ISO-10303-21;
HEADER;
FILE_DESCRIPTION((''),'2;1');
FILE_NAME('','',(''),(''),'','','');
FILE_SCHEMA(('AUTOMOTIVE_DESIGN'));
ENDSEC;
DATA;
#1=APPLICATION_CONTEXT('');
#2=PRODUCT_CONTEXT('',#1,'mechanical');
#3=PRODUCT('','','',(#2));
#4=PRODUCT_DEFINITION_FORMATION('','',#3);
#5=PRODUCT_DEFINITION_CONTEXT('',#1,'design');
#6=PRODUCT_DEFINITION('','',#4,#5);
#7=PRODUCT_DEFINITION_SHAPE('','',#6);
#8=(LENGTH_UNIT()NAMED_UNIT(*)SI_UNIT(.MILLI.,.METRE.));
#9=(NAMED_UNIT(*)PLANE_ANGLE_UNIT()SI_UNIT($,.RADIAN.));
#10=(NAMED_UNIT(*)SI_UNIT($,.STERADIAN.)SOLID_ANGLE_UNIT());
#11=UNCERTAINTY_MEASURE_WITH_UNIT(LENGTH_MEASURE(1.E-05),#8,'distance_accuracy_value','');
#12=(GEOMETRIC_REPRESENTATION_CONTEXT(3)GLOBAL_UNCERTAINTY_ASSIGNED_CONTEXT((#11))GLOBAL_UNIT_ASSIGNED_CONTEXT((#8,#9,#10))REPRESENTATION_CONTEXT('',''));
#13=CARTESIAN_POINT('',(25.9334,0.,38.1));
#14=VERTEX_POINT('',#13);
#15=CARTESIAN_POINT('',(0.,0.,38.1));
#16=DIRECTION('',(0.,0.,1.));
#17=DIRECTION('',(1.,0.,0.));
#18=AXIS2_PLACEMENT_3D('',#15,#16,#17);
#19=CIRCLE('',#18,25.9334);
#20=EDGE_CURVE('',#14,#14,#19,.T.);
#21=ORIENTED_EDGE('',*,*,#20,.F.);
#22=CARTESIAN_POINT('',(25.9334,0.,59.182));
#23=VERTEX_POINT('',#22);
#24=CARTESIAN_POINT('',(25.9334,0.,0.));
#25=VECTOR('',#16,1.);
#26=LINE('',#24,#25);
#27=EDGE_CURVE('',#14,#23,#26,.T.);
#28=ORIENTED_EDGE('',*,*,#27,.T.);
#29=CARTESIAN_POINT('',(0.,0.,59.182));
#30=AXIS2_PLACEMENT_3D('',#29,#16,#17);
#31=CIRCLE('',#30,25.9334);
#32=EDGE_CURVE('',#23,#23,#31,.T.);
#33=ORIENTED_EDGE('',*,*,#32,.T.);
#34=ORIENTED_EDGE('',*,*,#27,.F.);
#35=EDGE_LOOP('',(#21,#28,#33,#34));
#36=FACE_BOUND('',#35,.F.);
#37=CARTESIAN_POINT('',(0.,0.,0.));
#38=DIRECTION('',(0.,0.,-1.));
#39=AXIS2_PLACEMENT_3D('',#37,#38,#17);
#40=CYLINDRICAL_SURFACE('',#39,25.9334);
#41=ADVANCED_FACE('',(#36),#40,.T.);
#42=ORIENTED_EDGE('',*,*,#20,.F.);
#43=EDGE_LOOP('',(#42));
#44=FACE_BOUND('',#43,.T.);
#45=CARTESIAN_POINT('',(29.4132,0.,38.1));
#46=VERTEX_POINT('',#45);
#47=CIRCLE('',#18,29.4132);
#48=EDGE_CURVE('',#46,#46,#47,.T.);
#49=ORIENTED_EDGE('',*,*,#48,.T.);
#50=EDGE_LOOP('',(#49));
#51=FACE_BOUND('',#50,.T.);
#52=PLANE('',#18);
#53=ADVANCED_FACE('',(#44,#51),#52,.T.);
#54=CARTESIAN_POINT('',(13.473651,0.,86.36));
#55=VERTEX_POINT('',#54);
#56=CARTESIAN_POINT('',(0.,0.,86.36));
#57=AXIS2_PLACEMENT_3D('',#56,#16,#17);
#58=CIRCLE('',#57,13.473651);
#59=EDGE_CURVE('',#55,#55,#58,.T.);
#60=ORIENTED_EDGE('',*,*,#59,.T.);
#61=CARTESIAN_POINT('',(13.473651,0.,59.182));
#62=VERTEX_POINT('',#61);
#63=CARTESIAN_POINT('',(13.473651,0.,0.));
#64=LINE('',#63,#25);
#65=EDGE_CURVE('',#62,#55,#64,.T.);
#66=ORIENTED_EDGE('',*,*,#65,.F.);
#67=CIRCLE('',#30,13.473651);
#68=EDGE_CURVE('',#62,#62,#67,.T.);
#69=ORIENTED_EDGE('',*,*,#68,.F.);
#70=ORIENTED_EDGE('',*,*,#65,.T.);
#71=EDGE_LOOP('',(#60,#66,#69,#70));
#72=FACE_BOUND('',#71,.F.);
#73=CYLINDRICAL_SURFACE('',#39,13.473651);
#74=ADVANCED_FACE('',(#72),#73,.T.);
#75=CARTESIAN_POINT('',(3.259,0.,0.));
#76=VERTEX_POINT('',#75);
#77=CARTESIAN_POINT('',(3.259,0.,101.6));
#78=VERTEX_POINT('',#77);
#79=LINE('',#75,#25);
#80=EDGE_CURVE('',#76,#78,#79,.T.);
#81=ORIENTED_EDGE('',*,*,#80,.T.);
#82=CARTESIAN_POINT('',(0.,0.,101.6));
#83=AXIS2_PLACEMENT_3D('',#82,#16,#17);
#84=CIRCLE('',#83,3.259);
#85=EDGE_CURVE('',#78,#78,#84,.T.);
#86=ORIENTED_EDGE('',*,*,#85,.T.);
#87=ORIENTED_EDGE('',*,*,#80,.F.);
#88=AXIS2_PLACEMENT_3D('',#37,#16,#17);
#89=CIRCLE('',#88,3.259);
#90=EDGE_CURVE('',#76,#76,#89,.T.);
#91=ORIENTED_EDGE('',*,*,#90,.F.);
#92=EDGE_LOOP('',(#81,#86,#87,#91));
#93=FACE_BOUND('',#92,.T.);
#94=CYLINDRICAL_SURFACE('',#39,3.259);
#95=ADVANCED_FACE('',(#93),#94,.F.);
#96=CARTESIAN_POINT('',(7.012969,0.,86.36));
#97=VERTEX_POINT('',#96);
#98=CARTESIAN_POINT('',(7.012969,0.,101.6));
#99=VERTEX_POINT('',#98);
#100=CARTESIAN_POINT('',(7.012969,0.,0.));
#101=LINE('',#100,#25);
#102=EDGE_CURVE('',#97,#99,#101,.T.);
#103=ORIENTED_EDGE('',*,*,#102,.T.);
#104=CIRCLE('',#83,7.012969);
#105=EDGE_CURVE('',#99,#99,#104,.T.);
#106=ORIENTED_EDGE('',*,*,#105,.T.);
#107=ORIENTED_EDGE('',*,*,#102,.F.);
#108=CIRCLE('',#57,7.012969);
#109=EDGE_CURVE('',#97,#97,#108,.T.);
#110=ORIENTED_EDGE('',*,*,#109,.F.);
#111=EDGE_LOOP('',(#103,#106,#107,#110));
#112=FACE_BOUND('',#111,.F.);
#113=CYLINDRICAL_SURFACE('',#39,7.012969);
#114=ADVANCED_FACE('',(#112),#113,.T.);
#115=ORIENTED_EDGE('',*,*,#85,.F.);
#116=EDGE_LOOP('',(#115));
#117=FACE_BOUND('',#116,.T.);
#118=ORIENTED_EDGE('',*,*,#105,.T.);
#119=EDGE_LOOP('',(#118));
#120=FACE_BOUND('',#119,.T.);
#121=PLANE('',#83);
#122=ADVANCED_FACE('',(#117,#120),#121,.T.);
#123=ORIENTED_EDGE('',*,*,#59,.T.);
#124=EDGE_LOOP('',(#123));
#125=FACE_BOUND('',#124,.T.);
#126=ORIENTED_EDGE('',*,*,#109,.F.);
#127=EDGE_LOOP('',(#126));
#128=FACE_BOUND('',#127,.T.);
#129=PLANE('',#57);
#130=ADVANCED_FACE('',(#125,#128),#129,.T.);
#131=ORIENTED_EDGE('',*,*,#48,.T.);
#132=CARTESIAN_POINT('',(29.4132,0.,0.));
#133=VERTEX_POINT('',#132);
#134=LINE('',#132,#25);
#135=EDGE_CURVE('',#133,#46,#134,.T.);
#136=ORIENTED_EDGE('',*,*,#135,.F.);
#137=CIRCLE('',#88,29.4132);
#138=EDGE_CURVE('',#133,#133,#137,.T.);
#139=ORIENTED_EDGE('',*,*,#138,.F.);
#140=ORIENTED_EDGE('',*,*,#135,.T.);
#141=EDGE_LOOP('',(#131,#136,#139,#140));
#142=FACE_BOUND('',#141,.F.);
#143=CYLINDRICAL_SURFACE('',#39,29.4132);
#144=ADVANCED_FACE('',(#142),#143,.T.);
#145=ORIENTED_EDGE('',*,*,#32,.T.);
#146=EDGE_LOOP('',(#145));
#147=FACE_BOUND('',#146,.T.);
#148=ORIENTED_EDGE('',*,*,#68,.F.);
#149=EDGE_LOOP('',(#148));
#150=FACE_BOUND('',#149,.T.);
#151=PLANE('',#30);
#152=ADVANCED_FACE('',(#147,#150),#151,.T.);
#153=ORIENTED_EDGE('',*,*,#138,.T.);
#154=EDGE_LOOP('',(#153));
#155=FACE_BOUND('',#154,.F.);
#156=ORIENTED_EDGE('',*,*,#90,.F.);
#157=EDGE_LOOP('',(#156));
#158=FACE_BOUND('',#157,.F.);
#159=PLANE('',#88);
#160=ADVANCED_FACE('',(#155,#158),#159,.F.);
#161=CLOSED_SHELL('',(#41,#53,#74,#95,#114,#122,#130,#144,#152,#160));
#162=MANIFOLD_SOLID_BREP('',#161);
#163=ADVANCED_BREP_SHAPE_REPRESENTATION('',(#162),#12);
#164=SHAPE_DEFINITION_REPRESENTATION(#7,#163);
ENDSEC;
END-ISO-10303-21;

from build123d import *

# Parameters (mm, degrees)
F0_R     = 29.4132
F0_R_2   = 25.9334
F1_DEPTH = 38.1
F0_R_3   = 13.4736510141
F2_DEPTH = 59.182
F0_R_4   = 7.012968683
F3_DEPTH = 86.36
F4_DEPTH = 50.8
F0_R_5   = 3.2589999641
F5_DEPTH = 101.6


# Not quite as in the source:
# - the program builds the solid bodies; features that only make, move or delete a surface that nothing else refers to are left out


with BuildPart() as f1:
    # F0 (on Top) → F1 (new body)
    with BuildSketch(Plane.XY):
        Circle(F0_R)
        Circle(F0_R_2, mode=Mode.SUBTRACT)
    extrude(amount=F1_DEPTH)

    # F0 (on Top) → F2 (join)
    with BuildSketch(Plane.XY):
        Circle(F0_R_2)
        Circle(F0_R_3, mode=Mode.SUBTRACT)
    extrude(amount=F2_DEPTH)

    # F0 (on Top) → F3 (join)
    with BuildSketch(Plane.XY):
        Circle(F0_R_3)
        Circle(F0_R_4, mode=Mode.SUBTRACT)
    extrude(amount=F3_DEPTH)

    # F0 (on Top) → F4 (join)
    with BuildSketch(Plane.XY):
        Circle(F0_R_3)
        Circle(F0_R_4, mode=Mode.SUBTRACT)
    extrude(amount=F4_DEPTH)

    # F0 (on Top) → F5 (join)
    with BuildSketch(Plane.XY):
        Circle(F0_R_4)
        Circle(F0_R_5, mode=Mode.SUBTRACT)
    extrude(amount=F5_DEPTH)


solid = f1.part
